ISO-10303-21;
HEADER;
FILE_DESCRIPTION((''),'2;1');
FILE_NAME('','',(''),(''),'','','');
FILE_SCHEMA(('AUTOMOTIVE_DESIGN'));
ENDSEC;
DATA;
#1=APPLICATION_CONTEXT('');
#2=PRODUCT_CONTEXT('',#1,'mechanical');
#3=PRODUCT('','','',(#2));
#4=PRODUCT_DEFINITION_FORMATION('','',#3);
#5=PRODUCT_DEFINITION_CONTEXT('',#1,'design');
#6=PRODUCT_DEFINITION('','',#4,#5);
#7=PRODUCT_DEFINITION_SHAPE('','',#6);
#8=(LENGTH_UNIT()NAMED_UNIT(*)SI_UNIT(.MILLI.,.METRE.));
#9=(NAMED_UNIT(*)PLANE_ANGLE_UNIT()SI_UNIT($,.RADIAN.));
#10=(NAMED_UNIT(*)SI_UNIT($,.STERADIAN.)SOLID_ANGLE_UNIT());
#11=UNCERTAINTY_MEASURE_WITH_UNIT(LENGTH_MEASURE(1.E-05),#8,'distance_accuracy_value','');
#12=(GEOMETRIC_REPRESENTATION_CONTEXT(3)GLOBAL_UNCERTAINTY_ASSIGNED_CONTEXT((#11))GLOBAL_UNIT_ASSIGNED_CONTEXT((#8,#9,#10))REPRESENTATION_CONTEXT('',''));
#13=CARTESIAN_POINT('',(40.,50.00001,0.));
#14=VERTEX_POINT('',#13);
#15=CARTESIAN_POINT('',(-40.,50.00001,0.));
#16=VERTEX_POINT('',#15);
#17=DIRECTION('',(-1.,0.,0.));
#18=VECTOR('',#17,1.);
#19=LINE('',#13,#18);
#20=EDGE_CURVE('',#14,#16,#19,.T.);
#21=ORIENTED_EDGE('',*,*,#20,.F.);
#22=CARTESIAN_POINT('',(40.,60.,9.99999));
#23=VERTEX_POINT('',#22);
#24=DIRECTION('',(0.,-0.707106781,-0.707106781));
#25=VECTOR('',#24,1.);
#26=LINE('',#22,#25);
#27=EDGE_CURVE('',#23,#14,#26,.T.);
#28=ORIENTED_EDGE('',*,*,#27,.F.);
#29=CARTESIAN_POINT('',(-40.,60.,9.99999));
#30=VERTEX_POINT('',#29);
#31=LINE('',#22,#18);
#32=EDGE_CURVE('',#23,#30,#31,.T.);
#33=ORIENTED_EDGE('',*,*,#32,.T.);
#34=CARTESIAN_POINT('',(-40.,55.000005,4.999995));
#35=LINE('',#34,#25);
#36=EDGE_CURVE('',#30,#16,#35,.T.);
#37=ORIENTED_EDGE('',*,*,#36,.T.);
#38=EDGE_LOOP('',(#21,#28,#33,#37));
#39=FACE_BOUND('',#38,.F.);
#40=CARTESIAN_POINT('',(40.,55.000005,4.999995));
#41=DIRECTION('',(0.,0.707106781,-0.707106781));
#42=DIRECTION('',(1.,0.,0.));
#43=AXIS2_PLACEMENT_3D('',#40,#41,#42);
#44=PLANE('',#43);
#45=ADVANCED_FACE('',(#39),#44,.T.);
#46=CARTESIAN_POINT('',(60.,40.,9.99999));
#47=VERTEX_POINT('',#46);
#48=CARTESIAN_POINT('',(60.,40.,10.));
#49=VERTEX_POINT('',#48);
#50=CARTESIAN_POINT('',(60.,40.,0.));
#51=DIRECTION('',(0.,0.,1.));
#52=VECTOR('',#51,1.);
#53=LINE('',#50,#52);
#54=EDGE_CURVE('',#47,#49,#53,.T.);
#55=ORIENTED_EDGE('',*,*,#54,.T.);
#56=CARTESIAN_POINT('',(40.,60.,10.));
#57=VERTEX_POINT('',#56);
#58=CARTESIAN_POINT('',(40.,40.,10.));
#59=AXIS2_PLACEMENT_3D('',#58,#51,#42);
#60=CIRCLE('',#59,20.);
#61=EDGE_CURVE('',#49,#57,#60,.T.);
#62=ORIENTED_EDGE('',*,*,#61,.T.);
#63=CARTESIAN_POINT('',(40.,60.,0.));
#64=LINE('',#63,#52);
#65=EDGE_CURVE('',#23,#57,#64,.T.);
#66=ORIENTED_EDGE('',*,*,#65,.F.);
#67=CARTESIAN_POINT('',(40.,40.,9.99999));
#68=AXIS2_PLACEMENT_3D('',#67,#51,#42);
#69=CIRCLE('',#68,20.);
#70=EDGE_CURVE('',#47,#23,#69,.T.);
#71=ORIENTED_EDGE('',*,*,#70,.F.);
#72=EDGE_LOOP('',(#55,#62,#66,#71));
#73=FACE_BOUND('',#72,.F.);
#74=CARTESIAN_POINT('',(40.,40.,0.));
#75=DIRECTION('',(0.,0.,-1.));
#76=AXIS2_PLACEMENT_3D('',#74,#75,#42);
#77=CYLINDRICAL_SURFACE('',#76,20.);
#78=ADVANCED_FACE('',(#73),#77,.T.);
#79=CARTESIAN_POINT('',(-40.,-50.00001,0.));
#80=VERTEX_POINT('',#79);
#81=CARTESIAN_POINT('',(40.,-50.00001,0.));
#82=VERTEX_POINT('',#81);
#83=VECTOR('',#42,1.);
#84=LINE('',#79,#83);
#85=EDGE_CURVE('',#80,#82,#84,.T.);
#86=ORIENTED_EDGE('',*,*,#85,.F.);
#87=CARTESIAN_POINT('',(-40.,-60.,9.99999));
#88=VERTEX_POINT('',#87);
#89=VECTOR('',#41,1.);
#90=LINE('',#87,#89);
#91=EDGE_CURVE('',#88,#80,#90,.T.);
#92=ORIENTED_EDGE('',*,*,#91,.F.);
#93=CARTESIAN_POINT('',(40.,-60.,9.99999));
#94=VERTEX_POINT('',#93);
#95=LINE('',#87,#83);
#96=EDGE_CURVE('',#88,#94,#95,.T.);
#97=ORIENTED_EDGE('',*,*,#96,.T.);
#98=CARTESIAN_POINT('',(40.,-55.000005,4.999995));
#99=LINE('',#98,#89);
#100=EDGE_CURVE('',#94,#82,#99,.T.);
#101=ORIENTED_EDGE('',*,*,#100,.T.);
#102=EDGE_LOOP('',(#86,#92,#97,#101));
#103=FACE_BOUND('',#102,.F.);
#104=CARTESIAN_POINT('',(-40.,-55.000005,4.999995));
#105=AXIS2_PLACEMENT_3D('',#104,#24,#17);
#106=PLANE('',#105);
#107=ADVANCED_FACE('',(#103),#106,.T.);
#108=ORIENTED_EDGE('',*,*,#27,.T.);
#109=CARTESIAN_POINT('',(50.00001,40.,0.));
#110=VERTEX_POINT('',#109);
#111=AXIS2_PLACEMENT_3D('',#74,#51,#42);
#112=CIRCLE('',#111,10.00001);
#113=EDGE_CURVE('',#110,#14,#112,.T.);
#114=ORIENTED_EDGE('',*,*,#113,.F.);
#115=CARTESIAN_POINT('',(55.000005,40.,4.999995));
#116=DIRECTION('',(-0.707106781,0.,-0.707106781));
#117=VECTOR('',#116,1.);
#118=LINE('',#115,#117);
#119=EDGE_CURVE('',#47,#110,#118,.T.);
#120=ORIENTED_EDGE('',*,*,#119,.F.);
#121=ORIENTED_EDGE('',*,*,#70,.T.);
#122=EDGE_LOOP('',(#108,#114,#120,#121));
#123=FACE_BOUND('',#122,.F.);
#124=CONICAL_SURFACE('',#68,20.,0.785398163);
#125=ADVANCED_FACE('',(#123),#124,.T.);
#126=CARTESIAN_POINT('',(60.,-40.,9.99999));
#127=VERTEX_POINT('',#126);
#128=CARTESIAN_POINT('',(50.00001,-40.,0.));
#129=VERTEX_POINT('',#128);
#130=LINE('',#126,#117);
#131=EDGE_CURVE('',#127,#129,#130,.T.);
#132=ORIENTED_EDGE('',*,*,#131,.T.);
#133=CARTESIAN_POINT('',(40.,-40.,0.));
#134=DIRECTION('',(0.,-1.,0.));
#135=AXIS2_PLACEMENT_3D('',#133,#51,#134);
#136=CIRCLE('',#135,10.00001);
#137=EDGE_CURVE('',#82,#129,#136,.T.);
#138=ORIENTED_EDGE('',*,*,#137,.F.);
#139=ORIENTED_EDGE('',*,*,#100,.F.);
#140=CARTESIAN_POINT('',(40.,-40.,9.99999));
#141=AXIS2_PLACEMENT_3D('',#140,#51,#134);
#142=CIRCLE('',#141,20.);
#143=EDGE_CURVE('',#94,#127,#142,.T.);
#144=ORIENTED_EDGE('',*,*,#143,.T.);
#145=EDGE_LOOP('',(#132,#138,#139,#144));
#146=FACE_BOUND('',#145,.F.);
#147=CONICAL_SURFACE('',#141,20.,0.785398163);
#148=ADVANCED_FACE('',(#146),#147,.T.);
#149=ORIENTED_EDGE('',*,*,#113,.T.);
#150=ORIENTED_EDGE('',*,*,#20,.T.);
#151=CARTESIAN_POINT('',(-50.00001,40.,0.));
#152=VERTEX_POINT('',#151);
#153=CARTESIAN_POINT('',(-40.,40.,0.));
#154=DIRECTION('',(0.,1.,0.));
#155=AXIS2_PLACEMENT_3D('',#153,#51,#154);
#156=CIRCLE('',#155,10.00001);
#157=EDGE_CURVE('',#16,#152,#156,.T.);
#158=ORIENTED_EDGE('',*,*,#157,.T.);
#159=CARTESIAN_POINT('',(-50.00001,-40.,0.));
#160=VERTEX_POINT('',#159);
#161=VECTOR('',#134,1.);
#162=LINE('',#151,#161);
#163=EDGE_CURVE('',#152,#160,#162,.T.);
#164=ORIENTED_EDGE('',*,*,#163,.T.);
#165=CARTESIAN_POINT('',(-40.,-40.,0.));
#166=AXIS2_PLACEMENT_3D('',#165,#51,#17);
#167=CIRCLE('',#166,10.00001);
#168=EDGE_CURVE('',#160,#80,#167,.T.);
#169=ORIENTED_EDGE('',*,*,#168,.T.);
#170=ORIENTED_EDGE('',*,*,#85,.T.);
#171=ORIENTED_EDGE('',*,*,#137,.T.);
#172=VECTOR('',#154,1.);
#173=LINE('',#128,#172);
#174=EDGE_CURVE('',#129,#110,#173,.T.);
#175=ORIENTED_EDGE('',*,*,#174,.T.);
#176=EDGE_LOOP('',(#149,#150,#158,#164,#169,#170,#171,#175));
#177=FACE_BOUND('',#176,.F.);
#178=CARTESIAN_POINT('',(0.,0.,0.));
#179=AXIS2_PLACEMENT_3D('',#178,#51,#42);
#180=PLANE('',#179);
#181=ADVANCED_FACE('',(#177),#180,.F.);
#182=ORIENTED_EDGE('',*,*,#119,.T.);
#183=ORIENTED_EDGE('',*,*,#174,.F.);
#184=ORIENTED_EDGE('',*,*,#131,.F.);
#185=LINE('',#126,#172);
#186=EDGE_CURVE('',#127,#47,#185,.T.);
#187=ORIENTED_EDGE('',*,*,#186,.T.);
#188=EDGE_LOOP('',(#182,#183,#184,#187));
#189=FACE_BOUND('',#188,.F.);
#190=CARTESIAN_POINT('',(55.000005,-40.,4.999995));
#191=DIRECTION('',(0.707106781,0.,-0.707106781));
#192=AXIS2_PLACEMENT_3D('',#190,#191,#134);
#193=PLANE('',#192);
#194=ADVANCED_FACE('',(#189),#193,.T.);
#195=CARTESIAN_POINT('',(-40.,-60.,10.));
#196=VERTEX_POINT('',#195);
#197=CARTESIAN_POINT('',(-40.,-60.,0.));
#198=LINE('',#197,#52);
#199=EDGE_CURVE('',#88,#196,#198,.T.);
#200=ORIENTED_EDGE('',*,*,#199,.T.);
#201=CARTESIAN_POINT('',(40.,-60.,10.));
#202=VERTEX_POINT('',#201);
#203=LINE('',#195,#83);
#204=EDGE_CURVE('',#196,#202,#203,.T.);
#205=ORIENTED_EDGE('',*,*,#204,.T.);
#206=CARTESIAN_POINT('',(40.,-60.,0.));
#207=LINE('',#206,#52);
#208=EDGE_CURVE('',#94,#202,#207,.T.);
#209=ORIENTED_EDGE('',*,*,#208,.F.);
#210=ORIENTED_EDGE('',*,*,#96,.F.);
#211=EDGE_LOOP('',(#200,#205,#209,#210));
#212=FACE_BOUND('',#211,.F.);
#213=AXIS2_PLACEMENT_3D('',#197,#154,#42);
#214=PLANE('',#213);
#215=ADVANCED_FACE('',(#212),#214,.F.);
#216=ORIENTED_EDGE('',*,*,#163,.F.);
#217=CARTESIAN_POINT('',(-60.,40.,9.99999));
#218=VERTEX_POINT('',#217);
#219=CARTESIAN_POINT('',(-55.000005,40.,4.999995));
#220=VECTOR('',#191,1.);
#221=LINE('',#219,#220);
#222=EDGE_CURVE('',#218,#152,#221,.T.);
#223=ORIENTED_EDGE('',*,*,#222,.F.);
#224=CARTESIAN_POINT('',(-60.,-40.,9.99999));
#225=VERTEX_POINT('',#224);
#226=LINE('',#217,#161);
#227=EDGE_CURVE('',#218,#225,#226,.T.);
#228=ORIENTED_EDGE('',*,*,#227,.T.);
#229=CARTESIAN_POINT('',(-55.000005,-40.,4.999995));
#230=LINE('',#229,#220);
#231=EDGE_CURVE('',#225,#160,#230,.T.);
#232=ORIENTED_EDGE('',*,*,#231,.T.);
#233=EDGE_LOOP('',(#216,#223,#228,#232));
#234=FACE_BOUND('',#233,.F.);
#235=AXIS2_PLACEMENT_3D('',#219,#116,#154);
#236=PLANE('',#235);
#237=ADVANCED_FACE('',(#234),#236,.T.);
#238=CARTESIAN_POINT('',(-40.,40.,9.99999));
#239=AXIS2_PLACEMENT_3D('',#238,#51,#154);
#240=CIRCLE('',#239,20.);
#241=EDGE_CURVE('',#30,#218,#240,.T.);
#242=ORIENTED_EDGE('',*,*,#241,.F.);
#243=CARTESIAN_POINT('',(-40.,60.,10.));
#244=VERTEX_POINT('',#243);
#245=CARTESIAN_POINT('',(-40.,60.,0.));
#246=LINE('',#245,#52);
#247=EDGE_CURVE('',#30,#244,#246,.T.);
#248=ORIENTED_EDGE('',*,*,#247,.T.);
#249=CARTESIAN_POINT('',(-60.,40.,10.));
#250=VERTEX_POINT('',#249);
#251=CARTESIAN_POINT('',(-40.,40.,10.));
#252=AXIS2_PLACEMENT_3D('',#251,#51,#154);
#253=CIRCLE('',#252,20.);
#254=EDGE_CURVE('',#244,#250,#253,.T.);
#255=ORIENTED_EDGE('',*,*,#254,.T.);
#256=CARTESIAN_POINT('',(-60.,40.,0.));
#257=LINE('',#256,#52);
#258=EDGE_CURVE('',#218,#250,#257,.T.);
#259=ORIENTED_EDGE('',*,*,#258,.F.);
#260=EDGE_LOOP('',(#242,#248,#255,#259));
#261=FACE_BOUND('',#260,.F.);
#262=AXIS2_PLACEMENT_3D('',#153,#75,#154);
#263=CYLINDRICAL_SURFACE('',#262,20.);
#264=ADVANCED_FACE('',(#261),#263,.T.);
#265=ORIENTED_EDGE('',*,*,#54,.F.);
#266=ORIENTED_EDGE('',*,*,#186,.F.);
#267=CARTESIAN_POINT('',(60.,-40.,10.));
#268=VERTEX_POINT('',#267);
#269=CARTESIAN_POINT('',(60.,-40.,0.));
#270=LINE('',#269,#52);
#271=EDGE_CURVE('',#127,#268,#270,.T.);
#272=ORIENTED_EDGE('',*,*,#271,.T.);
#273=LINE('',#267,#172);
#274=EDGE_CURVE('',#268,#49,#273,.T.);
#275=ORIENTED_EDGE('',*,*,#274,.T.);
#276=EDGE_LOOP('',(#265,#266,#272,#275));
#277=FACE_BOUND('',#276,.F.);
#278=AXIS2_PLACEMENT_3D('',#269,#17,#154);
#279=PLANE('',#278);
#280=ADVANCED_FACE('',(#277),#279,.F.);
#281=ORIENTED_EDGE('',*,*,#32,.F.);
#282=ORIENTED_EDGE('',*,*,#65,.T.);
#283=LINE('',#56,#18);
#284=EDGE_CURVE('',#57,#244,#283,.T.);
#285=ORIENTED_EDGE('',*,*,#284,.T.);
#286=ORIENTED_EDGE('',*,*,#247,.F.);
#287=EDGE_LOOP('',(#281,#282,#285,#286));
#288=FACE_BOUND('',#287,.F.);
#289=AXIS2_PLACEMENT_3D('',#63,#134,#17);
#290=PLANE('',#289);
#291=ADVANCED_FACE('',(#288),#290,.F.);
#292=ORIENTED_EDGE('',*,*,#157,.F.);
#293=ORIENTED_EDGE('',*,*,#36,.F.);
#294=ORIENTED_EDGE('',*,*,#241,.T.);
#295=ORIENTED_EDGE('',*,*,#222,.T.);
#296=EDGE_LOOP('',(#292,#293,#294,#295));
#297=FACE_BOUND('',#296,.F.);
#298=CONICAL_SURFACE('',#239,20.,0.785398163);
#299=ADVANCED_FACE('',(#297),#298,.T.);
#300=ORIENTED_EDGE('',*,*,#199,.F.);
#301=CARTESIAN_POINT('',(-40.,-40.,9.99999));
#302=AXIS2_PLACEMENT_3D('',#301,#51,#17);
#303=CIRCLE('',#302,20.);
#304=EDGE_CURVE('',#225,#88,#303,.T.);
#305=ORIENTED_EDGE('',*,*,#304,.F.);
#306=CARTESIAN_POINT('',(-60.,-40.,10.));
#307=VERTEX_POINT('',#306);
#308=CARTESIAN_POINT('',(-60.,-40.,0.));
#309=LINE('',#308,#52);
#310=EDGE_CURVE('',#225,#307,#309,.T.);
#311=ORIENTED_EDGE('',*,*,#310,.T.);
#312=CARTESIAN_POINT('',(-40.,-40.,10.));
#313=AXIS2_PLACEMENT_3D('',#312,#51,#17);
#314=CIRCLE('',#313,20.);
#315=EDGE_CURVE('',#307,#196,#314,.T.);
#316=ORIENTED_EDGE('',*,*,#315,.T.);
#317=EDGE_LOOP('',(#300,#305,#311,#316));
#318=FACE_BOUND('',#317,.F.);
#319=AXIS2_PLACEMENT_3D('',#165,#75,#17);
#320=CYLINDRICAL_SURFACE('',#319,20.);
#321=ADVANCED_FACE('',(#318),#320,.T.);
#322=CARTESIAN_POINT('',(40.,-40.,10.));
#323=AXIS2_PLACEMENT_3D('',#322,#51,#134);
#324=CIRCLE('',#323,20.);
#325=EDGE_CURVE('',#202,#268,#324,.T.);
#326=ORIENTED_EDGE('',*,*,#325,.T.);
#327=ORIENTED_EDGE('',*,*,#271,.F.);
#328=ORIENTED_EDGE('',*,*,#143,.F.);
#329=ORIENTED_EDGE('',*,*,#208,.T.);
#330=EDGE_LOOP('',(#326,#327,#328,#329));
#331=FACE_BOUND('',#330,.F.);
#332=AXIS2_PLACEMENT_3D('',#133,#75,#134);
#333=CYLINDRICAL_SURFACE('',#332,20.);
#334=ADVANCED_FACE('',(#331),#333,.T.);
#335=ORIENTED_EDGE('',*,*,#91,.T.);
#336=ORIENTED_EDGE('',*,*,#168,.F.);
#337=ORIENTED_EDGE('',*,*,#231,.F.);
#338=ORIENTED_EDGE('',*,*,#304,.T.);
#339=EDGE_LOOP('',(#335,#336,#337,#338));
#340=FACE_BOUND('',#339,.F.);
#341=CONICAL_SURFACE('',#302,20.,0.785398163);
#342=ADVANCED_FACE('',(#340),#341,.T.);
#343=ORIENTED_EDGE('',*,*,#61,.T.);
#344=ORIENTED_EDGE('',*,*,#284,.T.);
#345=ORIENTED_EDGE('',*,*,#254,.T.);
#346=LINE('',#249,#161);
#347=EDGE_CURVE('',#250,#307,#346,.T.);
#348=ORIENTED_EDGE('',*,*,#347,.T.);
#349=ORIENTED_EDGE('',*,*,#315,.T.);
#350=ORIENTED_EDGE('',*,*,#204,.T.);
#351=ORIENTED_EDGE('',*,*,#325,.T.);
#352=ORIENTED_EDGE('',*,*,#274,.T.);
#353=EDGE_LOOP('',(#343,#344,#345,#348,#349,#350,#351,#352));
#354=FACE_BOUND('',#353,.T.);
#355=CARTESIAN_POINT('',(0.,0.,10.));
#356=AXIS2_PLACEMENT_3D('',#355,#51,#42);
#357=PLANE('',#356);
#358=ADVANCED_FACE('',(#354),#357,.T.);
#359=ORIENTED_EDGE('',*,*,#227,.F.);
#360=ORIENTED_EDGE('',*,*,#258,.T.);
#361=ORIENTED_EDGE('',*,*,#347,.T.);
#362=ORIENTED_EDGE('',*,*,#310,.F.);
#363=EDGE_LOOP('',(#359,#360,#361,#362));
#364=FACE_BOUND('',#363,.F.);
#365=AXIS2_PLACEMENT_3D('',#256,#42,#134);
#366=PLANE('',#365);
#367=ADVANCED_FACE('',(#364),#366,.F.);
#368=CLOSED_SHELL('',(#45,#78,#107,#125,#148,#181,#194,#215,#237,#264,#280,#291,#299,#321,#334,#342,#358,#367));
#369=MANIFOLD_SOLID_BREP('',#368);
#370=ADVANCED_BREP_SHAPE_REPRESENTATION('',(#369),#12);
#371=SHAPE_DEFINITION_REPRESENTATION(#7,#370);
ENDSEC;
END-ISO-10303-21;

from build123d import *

# Parameters (mm, degrees)
F1_DEPTH = 10
F2_SIZE  = 9.99999


# Not quite as in the source:
# - a fillet or chamfer is up to 0.001 mm smaller than in the source, because OpenCascade refuses the exact size


with BuildPart() as f1:
    # F0 (on Top) → F1 (new body)
    with BuildSketch(Plane.XY):
        with BuildLine():
            Line((-40, -60), (40, -60))
            ThreePointArc((40, -60), (54.1421356237, -54.1421356237), (60, -40))
            Line((60, -40), (60, 40))
            ThreePointArc((60, 40), (54.1421356237, 54.1421356237), (40, 60))
            Line((40, 60), (-40, 60))
            ThreePointArc((-40, 60), (-54.1421356237, 54.1421356237), (-60, 40))
            Line((-60, 40), (-60, -40))
            ThreePointArc((-60, -40), (-54.1421356237, -54.1421356237), (-40, -60))
        make_face()
    extrude(amount=F1_DEPTH)

    # F2 (size 10 in the source; OpenCascade refuses exactly that, so slightly less here)
    f2_edges = [f1.edges().sort_by_distance(p)[0] for p in [
        (-60, 0, 0),
    ]]
    chamfer(f2_edges, length=F2_SIZE)


solid = f1.part
